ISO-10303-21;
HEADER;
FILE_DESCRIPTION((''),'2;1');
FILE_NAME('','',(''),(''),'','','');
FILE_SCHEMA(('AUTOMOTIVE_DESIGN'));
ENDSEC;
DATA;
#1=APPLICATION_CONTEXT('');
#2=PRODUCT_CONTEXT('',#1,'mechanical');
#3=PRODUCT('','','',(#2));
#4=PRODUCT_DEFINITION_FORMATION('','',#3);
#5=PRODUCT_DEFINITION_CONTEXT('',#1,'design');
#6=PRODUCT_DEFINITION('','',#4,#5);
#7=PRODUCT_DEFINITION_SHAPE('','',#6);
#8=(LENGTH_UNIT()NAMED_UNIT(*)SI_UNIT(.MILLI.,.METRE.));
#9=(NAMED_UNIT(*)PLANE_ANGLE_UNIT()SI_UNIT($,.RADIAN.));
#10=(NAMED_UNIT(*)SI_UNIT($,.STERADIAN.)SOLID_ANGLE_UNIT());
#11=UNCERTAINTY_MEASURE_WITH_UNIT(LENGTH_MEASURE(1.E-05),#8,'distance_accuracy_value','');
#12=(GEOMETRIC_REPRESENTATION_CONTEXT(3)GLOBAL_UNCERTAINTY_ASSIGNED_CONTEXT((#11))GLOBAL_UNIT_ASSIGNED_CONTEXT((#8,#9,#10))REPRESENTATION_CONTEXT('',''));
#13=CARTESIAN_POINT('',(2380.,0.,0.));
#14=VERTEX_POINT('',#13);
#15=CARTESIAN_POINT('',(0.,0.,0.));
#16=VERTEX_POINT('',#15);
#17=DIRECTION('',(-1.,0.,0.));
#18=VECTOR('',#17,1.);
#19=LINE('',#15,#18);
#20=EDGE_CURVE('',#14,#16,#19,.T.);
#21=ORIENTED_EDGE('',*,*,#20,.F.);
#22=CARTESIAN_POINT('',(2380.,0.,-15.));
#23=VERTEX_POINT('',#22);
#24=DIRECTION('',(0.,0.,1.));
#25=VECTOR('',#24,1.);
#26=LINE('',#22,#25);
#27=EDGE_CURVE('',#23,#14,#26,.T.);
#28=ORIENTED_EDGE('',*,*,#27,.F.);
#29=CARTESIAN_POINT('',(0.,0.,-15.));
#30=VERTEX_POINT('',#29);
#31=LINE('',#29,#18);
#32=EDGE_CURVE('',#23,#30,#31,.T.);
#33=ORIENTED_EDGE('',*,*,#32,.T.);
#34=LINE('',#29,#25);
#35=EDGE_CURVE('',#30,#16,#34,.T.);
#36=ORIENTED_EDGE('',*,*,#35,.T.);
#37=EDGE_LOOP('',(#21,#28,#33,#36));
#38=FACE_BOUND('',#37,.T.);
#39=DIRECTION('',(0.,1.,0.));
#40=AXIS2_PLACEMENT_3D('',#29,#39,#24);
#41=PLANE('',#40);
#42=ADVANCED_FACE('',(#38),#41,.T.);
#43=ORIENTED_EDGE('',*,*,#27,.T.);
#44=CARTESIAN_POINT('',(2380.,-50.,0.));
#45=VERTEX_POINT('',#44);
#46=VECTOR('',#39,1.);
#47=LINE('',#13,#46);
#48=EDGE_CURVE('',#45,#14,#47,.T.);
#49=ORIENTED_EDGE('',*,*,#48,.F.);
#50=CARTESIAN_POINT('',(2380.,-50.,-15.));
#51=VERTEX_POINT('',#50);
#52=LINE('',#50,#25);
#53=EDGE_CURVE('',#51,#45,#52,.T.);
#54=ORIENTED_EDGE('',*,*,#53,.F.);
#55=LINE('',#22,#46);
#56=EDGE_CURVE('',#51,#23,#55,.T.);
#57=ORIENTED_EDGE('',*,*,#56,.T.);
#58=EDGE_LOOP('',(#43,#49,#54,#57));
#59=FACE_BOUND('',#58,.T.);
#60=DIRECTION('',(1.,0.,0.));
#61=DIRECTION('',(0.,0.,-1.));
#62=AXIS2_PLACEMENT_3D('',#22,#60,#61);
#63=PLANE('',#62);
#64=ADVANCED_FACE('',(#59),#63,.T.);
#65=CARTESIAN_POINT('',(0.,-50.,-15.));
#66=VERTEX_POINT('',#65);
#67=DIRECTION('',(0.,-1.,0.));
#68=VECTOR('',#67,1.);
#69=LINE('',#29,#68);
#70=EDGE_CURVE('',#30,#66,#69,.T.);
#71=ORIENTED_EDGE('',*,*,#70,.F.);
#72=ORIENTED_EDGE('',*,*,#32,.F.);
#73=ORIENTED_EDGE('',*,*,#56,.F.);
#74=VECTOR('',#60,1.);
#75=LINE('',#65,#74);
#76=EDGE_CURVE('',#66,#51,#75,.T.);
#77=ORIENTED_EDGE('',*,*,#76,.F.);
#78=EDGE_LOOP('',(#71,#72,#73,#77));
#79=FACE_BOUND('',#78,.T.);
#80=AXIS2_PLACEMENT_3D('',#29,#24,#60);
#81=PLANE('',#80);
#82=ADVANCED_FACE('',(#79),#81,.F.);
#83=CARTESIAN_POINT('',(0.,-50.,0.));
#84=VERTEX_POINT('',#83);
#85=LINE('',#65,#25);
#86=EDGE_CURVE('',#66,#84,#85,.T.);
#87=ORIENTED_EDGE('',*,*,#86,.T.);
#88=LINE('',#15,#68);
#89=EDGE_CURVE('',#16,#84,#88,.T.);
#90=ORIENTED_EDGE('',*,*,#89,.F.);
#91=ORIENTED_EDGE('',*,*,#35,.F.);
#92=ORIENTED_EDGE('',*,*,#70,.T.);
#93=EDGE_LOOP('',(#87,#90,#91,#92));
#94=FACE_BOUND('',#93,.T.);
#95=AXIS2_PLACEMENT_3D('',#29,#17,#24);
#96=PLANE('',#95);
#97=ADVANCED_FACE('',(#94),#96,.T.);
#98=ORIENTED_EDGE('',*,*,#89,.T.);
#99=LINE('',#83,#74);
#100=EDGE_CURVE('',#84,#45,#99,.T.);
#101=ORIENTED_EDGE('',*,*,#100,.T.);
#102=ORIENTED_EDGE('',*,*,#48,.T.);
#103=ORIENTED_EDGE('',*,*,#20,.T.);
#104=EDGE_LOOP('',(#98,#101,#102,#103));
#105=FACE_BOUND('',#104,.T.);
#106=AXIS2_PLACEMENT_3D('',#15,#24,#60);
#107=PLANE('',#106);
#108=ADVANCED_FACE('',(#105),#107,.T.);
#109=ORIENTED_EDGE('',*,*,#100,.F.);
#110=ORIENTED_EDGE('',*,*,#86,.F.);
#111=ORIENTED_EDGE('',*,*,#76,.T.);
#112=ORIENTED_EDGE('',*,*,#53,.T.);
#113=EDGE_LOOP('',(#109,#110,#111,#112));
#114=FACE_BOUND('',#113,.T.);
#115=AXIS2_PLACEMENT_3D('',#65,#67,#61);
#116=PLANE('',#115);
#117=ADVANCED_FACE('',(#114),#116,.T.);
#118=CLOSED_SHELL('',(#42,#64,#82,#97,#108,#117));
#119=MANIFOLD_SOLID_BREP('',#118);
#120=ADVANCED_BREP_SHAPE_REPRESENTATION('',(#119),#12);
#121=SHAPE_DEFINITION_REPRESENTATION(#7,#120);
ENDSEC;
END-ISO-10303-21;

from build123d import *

# Parameters (mm, degrees)
IZIM1_W            = 2380
IZIM1_H            = 50
TABAN_FLAN_1_DEPTH = 15


# Sheet-metal steps are written as plain solids
with BuildPart() as part:
    # Çizim1 → Taban-Flanş1 (new body)
    with BuildSketch(Plane.XY):
        with Locations((1190, -25)):
            Rectangle(IZIM1_W, IZIM1_H)
    extrude(amount=-TABAN_FLAN_1_DEPTH)


solid = part.part
